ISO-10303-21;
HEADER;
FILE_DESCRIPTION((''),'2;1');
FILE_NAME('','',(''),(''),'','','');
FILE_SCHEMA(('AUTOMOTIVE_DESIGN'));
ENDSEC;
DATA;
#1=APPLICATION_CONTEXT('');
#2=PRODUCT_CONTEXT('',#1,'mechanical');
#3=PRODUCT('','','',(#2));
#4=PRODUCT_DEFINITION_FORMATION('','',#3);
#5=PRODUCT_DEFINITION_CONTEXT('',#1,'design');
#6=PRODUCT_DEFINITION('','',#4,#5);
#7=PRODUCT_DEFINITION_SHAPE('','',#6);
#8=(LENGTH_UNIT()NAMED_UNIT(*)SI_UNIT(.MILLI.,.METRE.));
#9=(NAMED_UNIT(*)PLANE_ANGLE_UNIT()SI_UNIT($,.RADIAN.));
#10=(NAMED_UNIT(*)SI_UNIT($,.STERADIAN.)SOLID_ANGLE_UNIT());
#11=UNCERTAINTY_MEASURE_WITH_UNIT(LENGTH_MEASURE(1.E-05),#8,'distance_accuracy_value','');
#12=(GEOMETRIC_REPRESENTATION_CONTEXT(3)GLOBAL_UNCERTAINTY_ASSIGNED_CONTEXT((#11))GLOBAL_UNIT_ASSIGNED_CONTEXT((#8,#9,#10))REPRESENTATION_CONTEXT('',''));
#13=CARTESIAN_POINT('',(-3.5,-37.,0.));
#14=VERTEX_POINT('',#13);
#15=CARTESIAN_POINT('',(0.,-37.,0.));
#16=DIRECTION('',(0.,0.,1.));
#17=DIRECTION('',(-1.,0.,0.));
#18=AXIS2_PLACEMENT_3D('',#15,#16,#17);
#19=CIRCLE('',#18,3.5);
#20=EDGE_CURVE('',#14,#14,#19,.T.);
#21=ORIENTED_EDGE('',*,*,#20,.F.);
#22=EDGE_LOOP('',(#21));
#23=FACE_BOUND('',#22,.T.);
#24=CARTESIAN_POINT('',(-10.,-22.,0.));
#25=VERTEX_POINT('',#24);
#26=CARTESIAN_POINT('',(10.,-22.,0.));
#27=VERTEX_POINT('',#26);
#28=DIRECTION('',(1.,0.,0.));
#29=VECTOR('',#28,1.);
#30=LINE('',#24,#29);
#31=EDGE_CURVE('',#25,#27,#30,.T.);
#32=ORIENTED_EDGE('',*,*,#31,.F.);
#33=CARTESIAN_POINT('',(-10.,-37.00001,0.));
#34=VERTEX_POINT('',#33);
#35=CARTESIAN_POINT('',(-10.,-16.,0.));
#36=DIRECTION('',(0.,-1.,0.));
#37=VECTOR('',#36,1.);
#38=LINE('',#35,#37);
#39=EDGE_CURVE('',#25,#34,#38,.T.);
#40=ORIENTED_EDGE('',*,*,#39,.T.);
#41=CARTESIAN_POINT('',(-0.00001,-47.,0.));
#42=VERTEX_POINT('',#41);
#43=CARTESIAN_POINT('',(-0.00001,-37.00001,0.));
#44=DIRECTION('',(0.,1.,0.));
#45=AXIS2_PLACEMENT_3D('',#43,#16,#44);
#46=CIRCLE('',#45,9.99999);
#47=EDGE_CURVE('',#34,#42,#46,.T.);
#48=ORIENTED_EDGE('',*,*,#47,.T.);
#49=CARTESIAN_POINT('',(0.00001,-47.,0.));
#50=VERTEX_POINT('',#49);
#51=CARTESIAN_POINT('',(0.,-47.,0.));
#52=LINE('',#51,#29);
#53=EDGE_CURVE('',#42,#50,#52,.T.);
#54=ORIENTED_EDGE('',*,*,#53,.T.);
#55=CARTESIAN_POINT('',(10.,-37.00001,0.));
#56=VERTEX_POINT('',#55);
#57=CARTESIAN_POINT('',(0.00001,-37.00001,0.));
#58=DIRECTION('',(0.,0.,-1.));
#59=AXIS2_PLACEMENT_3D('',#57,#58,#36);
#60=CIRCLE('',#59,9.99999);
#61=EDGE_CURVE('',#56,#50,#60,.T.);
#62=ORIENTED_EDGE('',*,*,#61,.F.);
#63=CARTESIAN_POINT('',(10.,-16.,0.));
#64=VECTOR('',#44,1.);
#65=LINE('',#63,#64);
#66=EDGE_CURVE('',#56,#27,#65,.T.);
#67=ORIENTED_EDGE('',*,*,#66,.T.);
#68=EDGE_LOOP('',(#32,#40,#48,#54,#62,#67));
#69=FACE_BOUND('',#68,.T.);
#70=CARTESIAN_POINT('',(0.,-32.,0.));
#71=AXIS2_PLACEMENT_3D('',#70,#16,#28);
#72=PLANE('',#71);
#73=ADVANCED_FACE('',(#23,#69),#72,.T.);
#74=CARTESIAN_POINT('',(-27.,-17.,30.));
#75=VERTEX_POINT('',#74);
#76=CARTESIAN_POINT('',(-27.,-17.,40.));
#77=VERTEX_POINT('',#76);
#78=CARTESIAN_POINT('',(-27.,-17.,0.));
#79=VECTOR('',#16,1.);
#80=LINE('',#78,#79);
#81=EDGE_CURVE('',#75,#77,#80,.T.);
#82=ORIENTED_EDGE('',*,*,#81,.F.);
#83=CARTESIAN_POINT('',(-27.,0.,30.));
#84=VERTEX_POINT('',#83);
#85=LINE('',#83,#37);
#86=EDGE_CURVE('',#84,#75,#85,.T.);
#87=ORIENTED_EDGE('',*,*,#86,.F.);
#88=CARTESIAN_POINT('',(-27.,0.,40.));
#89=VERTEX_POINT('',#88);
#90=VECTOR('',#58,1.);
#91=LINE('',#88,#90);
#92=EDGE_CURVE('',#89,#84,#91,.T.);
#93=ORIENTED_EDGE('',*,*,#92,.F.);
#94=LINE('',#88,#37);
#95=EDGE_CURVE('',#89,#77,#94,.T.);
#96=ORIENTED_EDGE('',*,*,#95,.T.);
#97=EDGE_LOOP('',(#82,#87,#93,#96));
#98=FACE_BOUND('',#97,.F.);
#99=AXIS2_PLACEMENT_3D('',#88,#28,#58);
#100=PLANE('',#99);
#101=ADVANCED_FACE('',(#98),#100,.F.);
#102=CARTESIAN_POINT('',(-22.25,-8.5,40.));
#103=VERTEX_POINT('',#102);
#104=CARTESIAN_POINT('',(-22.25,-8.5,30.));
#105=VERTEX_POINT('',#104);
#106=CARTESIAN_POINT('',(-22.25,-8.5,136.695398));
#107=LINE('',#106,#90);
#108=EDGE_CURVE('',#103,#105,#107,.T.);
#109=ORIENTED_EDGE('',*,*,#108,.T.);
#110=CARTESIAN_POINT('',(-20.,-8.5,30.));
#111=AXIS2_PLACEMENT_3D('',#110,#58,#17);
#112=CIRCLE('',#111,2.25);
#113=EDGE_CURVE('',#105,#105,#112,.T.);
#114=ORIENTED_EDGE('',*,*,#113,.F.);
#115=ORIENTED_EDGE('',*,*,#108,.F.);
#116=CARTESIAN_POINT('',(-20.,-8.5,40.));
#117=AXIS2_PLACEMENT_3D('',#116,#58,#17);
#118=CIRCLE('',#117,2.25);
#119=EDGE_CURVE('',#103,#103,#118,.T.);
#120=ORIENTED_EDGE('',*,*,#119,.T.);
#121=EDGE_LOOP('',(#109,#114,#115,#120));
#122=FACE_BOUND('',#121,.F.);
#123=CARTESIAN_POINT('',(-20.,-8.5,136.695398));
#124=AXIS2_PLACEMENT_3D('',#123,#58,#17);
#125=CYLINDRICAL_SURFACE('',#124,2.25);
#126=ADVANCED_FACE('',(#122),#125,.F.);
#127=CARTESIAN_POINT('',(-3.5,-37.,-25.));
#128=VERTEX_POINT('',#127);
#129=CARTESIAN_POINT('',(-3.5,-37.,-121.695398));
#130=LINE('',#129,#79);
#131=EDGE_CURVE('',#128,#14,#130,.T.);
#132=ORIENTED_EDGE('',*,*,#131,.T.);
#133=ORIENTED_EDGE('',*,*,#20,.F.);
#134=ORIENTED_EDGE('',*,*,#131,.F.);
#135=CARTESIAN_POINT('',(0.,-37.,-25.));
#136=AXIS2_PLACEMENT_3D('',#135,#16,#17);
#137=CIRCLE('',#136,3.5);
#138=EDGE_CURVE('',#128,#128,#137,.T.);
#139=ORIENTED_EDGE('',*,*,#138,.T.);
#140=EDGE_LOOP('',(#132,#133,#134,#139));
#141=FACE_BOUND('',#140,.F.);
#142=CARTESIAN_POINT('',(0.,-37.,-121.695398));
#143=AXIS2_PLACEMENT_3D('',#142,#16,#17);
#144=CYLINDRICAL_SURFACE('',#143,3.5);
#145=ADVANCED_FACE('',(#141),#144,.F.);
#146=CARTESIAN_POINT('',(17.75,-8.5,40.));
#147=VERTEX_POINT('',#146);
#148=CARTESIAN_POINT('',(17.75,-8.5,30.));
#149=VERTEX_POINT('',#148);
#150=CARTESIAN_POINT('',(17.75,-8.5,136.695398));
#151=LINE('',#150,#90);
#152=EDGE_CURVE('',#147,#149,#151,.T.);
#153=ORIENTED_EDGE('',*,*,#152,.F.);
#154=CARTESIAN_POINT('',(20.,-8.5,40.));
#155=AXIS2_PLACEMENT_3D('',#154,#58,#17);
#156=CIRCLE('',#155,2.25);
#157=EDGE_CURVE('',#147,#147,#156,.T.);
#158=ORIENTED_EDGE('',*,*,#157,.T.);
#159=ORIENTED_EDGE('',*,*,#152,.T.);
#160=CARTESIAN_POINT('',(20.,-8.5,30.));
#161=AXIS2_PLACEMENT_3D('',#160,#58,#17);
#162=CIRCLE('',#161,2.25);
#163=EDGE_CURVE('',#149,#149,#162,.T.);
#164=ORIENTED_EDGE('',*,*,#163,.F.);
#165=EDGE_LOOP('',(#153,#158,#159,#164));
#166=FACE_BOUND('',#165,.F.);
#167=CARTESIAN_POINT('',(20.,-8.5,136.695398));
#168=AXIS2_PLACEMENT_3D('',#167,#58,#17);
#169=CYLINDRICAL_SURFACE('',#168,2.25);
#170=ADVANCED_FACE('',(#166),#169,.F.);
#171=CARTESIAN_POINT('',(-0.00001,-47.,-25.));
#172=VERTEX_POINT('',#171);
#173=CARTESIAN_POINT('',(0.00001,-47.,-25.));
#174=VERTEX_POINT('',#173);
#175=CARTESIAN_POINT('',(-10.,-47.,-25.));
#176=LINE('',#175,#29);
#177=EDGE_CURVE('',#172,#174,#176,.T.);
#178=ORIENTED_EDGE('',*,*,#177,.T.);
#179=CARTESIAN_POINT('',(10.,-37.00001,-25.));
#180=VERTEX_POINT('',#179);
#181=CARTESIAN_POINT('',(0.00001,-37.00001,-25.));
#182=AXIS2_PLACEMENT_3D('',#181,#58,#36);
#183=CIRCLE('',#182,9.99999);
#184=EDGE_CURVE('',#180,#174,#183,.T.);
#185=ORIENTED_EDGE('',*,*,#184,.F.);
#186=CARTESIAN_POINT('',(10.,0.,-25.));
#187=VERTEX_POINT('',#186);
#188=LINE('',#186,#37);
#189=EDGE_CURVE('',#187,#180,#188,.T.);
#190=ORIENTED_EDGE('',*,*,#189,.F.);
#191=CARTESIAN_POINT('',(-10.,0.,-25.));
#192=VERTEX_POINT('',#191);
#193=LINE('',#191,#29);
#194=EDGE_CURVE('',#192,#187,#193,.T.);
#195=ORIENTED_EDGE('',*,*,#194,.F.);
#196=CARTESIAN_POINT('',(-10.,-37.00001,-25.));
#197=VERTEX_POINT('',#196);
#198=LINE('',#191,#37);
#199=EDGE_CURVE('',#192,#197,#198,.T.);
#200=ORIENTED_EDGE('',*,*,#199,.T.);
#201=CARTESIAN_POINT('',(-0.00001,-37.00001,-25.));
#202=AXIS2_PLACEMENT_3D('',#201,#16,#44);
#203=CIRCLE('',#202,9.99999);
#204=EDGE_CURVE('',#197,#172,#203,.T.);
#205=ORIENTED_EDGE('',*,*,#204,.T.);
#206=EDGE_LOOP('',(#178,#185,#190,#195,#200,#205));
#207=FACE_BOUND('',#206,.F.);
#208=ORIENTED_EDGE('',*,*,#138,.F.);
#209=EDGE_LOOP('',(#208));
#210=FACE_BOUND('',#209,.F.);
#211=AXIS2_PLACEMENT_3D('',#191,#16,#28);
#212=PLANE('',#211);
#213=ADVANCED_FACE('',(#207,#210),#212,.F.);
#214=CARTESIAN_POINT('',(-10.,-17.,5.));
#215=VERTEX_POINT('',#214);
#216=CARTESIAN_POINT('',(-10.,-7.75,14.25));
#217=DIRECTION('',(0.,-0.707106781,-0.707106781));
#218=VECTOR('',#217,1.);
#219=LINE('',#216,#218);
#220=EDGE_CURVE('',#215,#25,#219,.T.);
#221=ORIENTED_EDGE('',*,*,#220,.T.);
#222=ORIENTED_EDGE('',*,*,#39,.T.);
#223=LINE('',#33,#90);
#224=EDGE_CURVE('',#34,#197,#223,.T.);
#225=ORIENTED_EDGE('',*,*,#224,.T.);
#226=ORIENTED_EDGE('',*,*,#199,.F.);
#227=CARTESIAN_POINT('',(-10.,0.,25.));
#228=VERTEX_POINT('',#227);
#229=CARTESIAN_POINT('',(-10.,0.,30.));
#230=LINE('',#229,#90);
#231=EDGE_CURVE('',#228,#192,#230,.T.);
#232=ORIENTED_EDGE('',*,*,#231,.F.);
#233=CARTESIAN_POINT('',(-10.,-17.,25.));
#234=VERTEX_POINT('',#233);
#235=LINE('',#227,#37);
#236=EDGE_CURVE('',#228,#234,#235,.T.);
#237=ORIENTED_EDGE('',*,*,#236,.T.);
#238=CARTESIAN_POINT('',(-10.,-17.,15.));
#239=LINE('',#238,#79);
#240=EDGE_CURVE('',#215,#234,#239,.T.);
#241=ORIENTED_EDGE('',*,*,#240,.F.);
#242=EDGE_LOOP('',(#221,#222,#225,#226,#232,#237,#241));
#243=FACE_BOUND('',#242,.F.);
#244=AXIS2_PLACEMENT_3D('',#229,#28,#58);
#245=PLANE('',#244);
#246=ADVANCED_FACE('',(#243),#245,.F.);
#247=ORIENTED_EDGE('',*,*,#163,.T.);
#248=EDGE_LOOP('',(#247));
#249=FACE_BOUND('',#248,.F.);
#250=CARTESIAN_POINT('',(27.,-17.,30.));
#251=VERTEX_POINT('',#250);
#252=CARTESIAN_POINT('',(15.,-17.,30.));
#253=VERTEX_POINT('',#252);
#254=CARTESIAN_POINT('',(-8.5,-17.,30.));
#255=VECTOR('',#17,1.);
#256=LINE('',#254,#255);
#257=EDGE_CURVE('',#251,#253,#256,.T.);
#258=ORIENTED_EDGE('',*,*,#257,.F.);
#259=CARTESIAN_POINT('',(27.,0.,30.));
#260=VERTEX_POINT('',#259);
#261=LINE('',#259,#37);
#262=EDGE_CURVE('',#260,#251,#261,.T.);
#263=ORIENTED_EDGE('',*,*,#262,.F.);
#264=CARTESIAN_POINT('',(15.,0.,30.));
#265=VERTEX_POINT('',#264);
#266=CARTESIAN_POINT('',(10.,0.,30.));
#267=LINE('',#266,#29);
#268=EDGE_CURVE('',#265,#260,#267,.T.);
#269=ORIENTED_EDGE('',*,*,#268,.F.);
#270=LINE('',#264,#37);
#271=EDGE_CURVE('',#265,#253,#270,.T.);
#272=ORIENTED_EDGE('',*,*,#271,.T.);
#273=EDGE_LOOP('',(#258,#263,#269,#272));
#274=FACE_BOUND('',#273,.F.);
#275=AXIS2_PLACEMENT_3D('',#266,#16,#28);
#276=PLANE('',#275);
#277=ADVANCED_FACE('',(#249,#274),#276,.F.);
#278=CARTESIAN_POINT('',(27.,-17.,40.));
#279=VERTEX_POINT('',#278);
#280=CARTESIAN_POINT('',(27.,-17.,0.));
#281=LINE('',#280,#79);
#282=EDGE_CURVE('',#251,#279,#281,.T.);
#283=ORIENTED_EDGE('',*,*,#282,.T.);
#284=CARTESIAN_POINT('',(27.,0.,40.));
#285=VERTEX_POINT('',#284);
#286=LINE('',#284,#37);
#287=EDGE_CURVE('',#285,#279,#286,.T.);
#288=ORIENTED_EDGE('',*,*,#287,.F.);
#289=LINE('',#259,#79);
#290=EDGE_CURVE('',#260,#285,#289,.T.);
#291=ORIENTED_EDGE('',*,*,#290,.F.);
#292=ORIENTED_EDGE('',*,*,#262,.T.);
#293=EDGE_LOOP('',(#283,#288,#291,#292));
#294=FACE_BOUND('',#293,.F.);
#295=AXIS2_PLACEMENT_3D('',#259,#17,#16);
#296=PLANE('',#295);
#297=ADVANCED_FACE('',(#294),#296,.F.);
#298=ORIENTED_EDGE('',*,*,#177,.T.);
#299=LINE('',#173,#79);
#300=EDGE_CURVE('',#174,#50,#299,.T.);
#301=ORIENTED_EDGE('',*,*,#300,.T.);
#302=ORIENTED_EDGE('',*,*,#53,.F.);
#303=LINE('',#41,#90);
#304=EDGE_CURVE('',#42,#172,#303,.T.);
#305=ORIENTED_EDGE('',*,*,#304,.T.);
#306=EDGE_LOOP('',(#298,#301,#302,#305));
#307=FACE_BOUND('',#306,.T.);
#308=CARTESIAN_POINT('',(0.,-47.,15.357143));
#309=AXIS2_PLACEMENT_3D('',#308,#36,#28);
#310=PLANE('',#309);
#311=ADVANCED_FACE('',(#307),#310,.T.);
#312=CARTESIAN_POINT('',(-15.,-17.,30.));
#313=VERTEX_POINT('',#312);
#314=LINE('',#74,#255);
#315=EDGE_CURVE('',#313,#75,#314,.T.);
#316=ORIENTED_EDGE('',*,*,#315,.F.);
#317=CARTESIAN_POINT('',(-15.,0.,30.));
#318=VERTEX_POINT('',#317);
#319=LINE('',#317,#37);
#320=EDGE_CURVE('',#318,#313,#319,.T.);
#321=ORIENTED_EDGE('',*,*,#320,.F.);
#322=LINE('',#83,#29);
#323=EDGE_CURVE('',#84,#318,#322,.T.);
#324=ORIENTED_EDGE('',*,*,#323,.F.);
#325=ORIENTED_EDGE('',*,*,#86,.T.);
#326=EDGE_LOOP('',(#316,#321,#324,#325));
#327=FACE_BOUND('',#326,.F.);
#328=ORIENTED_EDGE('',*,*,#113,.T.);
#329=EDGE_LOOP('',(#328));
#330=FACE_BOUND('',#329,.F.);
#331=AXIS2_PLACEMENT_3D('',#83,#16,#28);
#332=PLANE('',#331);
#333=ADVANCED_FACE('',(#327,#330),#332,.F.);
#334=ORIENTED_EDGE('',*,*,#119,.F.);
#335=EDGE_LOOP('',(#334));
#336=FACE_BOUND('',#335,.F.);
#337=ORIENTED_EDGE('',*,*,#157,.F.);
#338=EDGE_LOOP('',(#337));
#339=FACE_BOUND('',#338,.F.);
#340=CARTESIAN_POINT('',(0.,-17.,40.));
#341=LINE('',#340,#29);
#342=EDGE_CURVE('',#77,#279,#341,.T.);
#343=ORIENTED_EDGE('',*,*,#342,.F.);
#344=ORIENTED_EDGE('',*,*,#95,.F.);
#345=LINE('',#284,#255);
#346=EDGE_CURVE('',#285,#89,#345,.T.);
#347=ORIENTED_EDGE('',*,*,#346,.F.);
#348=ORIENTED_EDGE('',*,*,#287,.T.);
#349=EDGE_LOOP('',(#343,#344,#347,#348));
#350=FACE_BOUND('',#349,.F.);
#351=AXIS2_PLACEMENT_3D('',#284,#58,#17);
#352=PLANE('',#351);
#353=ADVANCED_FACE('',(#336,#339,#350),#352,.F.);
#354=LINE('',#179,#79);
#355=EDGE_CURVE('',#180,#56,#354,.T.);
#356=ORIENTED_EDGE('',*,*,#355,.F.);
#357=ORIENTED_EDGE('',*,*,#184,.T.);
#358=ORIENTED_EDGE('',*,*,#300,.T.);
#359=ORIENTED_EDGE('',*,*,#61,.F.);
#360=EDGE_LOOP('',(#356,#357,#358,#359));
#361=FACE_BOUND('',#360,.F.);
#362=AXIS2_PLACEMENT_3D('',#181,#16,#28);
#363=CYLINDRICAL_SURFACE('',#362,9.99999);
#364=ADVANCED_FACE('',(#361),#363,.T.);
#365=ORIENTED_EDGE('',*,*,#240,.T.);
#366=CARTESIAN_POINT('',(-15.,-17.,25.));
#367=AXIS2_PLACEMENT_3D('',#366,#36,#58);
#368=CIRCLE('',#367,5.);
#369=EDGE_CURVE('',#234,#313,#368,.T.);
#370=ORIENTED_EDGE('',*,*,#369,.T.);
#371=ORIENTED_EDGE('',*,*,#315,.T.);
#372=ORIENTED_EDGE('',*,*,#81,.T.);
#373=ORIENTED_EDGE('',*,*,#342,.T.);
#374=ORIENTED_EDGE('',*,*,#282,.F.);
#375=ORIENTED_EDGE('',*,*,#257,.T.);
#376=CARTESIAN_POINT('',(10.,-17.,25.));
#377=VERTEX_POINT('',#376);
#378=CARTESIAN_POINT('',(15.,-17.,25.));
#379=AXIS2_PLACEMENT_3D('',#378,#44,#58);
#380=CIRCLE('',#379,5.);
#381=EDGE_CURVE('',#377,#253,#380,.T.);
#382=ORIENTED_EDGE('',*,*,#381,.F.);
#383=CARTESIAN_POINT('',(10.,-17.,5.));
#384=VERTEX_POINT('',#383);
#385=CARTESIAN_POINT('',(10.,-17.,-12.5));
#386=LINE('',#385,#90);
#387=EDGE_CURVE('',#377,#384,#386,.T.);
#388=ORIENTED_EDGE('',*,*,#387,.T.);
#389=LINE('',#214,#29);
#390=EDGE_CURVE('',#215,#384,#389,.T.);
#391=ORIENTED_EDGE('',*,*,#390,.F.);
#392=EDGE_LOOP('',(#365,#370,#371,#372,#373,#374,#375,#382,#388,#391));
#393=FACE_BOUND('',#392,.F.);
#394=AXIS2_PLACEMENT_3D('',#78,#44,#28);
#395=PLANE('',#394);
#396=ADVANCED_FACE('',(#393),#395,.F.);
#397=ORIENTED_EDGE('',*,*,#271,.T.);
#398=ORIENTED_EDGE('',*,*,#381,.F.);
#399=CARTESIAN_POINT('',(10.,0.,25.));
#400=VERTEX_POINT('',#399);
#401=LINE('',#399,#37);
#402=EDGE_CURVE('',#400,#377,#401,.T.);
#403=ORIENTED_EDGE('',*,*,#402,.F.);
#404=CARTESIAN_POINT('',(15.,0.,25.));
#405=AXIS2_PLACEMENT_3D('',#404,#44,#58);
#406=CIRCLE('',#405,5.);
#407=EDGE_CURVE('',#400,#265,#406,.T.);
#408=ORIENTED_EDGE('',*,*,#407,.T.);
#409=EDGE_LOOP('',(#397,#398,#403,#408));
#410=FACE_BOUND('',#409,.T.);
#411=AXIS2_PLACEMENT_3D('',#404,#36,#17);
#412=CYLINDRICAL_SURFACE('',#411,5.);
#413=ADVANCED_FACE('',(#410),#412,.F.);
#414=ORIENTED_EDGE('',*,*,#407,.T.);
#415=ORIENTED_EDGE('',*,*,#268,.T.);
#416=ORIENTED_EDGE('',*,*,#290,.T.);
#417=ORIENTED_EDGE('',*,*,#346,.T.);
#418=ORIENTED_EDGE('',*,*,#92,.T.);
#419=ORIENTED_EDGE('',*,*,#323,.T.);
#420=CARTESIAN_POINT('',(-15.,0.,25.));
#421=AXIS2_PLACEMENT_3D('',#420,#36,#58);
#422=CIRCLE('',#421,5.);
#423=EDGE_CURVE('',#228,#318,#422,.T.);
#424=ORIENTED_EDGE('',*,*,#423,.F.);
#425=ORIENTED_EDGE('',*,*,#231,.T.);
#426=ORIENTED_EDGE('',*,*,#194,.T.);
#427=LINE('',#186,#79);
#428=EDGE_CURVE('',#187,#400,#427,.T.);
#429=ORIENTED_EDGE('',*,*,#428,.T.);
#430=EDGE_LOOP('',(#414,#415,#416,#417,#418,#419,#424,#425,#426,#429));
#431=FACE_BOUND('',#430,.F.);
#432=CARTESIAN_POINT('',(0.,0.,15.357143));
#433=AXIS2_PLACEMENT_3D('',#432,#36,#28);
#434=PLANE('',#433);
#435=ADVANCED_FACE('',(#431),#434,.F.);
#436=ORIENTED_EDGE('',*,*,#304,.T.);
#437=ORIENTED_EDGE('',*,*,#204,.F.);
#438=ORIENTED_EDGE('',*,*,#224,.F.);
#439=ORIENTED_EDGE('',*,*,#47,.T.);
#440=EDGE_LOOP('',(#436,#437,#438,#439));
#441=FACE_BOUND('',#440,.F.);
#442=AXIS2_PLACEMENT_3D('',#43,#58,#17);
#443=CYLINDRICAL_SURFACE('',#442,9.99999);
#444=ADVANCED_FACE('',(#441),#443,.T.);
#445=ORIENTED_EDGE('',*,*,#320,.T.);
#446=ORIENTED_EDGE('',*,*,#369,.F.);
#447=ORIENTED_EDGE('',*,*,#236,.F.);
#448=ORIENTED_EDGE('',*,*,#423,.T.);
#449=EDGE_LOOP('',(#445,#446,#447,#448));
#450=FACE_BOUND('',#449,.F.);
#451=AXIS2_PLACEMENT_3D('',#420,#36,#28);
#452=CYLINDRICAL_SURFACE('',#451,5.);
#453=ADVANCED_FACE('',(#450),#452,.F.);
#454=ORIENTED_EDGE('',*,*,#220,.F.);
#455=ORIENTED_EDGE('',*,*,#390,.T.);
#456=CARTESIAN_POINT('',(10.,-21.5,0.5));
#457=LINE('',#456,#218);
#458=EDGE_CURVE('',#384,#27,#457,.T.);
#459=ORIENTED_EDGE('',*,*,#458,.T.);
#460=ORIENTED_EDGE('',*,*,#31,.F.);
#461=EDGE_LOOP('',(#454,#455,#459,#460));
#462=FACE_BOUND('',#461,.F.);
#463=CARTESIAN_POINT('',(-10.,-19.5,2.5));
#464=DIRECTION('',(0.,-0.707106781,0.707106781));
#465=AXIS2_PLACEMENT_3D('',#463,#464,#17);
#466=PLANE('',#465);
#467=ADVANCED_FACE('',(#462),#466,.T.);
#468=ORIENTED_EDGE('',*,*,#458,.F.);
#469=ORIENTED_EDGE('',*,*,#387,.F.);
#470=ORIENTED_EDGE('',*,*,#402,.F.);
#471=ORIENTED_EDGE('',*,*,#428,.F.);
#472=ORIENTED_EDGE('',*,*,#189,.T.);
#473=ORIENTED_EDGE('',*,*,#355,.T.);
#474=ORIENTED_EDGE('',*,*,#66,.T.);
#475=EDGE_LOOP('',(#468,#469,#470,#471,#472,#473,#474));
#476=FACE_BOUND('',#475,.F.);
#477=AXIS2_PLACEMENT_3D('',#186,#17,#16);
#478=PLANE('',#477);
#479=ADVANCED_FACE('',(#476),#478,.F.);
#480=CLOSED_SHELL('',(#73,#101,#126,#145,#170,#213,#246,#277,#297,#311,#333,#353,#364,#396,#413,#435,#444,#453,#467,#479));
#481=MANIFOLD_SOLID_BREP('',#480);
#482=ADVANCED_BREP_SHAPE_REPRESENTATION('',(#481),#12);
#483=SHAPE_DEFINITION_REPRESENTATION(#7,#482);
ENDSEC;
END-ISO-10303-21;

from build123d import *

# Parameters (mm, degrees)
F1_DEPTH = 47
F3_D     = 7
F4_W     = 54
F4_H     = 30
F5_DEPTH = 40.001
F6_R     = 9.99999
F8_R     = 5
F10_D    = 4.5
F11_SIZE = 5


# Not quite as in the source:
# - a fillet or chamfer is up to 0.001 mm smaller than in the source, because OpenCascade refuses the exact size


with BuildPart() as f1:
    # F0 (on Front) → F1 (new body)
    with BuildSketch(Plane.XZ):
        Polygon((27, 40), (-27, 40), (-27, 30), (-10, 30), (-10, -25), (10, -25), (10, 30), (27, 30), align=None)
    extrude(amount=F1_DEPTH)

    # F3 (through all)
    with Locations(Plane(origin=(0, 0, -25), x_dir=(1, 0, 0), z_dir=(0, 0, -1))):
        with Locations((0, 37)):
            Hole(F3_D / 2)

    # F4 (on Top) → F5 (cut, through all)
    with BuildSketch(Plane.XY):
        with Locations((0, -32)):
            Rectangle(F4_W, F4_H)
    extrude(amount=F5_DEPTH, mode=Mode.SUBTRACT)

    # F6 (radius 10 in the source; OpenCascade refuses exactly that, so slightly less here)
    f6_edges = [f1.edges().sort_by_distance(p)[0] for p in [
        (-10, -47, -12.5),
        (10, -47, -12.5),
    ]]
    fillet(f6_edges, radius=F6_R)

    # F8
    f8_edges = [f1.edges().sort_by_distance(p)[0] for p in [
        (10, -8.5, 30),
        (-10, -8.5, 30),
    ]]
    fillet(f8_edges, radius=F8_R)

    # F10 (through all)
    with Locations(Plane.XY.offset(40)):
        with Locations((-20, -8.5), (20, -8.5)):
            Hole(F10_D / 2)

    # F11
    f11_edges = [f1.edges().sort_by_distance(p)[0] for p in [
        (0, -17, 0),
    ]]
    chamfer(f11_edges, length=F11_SIZE)


solid = f1.part
